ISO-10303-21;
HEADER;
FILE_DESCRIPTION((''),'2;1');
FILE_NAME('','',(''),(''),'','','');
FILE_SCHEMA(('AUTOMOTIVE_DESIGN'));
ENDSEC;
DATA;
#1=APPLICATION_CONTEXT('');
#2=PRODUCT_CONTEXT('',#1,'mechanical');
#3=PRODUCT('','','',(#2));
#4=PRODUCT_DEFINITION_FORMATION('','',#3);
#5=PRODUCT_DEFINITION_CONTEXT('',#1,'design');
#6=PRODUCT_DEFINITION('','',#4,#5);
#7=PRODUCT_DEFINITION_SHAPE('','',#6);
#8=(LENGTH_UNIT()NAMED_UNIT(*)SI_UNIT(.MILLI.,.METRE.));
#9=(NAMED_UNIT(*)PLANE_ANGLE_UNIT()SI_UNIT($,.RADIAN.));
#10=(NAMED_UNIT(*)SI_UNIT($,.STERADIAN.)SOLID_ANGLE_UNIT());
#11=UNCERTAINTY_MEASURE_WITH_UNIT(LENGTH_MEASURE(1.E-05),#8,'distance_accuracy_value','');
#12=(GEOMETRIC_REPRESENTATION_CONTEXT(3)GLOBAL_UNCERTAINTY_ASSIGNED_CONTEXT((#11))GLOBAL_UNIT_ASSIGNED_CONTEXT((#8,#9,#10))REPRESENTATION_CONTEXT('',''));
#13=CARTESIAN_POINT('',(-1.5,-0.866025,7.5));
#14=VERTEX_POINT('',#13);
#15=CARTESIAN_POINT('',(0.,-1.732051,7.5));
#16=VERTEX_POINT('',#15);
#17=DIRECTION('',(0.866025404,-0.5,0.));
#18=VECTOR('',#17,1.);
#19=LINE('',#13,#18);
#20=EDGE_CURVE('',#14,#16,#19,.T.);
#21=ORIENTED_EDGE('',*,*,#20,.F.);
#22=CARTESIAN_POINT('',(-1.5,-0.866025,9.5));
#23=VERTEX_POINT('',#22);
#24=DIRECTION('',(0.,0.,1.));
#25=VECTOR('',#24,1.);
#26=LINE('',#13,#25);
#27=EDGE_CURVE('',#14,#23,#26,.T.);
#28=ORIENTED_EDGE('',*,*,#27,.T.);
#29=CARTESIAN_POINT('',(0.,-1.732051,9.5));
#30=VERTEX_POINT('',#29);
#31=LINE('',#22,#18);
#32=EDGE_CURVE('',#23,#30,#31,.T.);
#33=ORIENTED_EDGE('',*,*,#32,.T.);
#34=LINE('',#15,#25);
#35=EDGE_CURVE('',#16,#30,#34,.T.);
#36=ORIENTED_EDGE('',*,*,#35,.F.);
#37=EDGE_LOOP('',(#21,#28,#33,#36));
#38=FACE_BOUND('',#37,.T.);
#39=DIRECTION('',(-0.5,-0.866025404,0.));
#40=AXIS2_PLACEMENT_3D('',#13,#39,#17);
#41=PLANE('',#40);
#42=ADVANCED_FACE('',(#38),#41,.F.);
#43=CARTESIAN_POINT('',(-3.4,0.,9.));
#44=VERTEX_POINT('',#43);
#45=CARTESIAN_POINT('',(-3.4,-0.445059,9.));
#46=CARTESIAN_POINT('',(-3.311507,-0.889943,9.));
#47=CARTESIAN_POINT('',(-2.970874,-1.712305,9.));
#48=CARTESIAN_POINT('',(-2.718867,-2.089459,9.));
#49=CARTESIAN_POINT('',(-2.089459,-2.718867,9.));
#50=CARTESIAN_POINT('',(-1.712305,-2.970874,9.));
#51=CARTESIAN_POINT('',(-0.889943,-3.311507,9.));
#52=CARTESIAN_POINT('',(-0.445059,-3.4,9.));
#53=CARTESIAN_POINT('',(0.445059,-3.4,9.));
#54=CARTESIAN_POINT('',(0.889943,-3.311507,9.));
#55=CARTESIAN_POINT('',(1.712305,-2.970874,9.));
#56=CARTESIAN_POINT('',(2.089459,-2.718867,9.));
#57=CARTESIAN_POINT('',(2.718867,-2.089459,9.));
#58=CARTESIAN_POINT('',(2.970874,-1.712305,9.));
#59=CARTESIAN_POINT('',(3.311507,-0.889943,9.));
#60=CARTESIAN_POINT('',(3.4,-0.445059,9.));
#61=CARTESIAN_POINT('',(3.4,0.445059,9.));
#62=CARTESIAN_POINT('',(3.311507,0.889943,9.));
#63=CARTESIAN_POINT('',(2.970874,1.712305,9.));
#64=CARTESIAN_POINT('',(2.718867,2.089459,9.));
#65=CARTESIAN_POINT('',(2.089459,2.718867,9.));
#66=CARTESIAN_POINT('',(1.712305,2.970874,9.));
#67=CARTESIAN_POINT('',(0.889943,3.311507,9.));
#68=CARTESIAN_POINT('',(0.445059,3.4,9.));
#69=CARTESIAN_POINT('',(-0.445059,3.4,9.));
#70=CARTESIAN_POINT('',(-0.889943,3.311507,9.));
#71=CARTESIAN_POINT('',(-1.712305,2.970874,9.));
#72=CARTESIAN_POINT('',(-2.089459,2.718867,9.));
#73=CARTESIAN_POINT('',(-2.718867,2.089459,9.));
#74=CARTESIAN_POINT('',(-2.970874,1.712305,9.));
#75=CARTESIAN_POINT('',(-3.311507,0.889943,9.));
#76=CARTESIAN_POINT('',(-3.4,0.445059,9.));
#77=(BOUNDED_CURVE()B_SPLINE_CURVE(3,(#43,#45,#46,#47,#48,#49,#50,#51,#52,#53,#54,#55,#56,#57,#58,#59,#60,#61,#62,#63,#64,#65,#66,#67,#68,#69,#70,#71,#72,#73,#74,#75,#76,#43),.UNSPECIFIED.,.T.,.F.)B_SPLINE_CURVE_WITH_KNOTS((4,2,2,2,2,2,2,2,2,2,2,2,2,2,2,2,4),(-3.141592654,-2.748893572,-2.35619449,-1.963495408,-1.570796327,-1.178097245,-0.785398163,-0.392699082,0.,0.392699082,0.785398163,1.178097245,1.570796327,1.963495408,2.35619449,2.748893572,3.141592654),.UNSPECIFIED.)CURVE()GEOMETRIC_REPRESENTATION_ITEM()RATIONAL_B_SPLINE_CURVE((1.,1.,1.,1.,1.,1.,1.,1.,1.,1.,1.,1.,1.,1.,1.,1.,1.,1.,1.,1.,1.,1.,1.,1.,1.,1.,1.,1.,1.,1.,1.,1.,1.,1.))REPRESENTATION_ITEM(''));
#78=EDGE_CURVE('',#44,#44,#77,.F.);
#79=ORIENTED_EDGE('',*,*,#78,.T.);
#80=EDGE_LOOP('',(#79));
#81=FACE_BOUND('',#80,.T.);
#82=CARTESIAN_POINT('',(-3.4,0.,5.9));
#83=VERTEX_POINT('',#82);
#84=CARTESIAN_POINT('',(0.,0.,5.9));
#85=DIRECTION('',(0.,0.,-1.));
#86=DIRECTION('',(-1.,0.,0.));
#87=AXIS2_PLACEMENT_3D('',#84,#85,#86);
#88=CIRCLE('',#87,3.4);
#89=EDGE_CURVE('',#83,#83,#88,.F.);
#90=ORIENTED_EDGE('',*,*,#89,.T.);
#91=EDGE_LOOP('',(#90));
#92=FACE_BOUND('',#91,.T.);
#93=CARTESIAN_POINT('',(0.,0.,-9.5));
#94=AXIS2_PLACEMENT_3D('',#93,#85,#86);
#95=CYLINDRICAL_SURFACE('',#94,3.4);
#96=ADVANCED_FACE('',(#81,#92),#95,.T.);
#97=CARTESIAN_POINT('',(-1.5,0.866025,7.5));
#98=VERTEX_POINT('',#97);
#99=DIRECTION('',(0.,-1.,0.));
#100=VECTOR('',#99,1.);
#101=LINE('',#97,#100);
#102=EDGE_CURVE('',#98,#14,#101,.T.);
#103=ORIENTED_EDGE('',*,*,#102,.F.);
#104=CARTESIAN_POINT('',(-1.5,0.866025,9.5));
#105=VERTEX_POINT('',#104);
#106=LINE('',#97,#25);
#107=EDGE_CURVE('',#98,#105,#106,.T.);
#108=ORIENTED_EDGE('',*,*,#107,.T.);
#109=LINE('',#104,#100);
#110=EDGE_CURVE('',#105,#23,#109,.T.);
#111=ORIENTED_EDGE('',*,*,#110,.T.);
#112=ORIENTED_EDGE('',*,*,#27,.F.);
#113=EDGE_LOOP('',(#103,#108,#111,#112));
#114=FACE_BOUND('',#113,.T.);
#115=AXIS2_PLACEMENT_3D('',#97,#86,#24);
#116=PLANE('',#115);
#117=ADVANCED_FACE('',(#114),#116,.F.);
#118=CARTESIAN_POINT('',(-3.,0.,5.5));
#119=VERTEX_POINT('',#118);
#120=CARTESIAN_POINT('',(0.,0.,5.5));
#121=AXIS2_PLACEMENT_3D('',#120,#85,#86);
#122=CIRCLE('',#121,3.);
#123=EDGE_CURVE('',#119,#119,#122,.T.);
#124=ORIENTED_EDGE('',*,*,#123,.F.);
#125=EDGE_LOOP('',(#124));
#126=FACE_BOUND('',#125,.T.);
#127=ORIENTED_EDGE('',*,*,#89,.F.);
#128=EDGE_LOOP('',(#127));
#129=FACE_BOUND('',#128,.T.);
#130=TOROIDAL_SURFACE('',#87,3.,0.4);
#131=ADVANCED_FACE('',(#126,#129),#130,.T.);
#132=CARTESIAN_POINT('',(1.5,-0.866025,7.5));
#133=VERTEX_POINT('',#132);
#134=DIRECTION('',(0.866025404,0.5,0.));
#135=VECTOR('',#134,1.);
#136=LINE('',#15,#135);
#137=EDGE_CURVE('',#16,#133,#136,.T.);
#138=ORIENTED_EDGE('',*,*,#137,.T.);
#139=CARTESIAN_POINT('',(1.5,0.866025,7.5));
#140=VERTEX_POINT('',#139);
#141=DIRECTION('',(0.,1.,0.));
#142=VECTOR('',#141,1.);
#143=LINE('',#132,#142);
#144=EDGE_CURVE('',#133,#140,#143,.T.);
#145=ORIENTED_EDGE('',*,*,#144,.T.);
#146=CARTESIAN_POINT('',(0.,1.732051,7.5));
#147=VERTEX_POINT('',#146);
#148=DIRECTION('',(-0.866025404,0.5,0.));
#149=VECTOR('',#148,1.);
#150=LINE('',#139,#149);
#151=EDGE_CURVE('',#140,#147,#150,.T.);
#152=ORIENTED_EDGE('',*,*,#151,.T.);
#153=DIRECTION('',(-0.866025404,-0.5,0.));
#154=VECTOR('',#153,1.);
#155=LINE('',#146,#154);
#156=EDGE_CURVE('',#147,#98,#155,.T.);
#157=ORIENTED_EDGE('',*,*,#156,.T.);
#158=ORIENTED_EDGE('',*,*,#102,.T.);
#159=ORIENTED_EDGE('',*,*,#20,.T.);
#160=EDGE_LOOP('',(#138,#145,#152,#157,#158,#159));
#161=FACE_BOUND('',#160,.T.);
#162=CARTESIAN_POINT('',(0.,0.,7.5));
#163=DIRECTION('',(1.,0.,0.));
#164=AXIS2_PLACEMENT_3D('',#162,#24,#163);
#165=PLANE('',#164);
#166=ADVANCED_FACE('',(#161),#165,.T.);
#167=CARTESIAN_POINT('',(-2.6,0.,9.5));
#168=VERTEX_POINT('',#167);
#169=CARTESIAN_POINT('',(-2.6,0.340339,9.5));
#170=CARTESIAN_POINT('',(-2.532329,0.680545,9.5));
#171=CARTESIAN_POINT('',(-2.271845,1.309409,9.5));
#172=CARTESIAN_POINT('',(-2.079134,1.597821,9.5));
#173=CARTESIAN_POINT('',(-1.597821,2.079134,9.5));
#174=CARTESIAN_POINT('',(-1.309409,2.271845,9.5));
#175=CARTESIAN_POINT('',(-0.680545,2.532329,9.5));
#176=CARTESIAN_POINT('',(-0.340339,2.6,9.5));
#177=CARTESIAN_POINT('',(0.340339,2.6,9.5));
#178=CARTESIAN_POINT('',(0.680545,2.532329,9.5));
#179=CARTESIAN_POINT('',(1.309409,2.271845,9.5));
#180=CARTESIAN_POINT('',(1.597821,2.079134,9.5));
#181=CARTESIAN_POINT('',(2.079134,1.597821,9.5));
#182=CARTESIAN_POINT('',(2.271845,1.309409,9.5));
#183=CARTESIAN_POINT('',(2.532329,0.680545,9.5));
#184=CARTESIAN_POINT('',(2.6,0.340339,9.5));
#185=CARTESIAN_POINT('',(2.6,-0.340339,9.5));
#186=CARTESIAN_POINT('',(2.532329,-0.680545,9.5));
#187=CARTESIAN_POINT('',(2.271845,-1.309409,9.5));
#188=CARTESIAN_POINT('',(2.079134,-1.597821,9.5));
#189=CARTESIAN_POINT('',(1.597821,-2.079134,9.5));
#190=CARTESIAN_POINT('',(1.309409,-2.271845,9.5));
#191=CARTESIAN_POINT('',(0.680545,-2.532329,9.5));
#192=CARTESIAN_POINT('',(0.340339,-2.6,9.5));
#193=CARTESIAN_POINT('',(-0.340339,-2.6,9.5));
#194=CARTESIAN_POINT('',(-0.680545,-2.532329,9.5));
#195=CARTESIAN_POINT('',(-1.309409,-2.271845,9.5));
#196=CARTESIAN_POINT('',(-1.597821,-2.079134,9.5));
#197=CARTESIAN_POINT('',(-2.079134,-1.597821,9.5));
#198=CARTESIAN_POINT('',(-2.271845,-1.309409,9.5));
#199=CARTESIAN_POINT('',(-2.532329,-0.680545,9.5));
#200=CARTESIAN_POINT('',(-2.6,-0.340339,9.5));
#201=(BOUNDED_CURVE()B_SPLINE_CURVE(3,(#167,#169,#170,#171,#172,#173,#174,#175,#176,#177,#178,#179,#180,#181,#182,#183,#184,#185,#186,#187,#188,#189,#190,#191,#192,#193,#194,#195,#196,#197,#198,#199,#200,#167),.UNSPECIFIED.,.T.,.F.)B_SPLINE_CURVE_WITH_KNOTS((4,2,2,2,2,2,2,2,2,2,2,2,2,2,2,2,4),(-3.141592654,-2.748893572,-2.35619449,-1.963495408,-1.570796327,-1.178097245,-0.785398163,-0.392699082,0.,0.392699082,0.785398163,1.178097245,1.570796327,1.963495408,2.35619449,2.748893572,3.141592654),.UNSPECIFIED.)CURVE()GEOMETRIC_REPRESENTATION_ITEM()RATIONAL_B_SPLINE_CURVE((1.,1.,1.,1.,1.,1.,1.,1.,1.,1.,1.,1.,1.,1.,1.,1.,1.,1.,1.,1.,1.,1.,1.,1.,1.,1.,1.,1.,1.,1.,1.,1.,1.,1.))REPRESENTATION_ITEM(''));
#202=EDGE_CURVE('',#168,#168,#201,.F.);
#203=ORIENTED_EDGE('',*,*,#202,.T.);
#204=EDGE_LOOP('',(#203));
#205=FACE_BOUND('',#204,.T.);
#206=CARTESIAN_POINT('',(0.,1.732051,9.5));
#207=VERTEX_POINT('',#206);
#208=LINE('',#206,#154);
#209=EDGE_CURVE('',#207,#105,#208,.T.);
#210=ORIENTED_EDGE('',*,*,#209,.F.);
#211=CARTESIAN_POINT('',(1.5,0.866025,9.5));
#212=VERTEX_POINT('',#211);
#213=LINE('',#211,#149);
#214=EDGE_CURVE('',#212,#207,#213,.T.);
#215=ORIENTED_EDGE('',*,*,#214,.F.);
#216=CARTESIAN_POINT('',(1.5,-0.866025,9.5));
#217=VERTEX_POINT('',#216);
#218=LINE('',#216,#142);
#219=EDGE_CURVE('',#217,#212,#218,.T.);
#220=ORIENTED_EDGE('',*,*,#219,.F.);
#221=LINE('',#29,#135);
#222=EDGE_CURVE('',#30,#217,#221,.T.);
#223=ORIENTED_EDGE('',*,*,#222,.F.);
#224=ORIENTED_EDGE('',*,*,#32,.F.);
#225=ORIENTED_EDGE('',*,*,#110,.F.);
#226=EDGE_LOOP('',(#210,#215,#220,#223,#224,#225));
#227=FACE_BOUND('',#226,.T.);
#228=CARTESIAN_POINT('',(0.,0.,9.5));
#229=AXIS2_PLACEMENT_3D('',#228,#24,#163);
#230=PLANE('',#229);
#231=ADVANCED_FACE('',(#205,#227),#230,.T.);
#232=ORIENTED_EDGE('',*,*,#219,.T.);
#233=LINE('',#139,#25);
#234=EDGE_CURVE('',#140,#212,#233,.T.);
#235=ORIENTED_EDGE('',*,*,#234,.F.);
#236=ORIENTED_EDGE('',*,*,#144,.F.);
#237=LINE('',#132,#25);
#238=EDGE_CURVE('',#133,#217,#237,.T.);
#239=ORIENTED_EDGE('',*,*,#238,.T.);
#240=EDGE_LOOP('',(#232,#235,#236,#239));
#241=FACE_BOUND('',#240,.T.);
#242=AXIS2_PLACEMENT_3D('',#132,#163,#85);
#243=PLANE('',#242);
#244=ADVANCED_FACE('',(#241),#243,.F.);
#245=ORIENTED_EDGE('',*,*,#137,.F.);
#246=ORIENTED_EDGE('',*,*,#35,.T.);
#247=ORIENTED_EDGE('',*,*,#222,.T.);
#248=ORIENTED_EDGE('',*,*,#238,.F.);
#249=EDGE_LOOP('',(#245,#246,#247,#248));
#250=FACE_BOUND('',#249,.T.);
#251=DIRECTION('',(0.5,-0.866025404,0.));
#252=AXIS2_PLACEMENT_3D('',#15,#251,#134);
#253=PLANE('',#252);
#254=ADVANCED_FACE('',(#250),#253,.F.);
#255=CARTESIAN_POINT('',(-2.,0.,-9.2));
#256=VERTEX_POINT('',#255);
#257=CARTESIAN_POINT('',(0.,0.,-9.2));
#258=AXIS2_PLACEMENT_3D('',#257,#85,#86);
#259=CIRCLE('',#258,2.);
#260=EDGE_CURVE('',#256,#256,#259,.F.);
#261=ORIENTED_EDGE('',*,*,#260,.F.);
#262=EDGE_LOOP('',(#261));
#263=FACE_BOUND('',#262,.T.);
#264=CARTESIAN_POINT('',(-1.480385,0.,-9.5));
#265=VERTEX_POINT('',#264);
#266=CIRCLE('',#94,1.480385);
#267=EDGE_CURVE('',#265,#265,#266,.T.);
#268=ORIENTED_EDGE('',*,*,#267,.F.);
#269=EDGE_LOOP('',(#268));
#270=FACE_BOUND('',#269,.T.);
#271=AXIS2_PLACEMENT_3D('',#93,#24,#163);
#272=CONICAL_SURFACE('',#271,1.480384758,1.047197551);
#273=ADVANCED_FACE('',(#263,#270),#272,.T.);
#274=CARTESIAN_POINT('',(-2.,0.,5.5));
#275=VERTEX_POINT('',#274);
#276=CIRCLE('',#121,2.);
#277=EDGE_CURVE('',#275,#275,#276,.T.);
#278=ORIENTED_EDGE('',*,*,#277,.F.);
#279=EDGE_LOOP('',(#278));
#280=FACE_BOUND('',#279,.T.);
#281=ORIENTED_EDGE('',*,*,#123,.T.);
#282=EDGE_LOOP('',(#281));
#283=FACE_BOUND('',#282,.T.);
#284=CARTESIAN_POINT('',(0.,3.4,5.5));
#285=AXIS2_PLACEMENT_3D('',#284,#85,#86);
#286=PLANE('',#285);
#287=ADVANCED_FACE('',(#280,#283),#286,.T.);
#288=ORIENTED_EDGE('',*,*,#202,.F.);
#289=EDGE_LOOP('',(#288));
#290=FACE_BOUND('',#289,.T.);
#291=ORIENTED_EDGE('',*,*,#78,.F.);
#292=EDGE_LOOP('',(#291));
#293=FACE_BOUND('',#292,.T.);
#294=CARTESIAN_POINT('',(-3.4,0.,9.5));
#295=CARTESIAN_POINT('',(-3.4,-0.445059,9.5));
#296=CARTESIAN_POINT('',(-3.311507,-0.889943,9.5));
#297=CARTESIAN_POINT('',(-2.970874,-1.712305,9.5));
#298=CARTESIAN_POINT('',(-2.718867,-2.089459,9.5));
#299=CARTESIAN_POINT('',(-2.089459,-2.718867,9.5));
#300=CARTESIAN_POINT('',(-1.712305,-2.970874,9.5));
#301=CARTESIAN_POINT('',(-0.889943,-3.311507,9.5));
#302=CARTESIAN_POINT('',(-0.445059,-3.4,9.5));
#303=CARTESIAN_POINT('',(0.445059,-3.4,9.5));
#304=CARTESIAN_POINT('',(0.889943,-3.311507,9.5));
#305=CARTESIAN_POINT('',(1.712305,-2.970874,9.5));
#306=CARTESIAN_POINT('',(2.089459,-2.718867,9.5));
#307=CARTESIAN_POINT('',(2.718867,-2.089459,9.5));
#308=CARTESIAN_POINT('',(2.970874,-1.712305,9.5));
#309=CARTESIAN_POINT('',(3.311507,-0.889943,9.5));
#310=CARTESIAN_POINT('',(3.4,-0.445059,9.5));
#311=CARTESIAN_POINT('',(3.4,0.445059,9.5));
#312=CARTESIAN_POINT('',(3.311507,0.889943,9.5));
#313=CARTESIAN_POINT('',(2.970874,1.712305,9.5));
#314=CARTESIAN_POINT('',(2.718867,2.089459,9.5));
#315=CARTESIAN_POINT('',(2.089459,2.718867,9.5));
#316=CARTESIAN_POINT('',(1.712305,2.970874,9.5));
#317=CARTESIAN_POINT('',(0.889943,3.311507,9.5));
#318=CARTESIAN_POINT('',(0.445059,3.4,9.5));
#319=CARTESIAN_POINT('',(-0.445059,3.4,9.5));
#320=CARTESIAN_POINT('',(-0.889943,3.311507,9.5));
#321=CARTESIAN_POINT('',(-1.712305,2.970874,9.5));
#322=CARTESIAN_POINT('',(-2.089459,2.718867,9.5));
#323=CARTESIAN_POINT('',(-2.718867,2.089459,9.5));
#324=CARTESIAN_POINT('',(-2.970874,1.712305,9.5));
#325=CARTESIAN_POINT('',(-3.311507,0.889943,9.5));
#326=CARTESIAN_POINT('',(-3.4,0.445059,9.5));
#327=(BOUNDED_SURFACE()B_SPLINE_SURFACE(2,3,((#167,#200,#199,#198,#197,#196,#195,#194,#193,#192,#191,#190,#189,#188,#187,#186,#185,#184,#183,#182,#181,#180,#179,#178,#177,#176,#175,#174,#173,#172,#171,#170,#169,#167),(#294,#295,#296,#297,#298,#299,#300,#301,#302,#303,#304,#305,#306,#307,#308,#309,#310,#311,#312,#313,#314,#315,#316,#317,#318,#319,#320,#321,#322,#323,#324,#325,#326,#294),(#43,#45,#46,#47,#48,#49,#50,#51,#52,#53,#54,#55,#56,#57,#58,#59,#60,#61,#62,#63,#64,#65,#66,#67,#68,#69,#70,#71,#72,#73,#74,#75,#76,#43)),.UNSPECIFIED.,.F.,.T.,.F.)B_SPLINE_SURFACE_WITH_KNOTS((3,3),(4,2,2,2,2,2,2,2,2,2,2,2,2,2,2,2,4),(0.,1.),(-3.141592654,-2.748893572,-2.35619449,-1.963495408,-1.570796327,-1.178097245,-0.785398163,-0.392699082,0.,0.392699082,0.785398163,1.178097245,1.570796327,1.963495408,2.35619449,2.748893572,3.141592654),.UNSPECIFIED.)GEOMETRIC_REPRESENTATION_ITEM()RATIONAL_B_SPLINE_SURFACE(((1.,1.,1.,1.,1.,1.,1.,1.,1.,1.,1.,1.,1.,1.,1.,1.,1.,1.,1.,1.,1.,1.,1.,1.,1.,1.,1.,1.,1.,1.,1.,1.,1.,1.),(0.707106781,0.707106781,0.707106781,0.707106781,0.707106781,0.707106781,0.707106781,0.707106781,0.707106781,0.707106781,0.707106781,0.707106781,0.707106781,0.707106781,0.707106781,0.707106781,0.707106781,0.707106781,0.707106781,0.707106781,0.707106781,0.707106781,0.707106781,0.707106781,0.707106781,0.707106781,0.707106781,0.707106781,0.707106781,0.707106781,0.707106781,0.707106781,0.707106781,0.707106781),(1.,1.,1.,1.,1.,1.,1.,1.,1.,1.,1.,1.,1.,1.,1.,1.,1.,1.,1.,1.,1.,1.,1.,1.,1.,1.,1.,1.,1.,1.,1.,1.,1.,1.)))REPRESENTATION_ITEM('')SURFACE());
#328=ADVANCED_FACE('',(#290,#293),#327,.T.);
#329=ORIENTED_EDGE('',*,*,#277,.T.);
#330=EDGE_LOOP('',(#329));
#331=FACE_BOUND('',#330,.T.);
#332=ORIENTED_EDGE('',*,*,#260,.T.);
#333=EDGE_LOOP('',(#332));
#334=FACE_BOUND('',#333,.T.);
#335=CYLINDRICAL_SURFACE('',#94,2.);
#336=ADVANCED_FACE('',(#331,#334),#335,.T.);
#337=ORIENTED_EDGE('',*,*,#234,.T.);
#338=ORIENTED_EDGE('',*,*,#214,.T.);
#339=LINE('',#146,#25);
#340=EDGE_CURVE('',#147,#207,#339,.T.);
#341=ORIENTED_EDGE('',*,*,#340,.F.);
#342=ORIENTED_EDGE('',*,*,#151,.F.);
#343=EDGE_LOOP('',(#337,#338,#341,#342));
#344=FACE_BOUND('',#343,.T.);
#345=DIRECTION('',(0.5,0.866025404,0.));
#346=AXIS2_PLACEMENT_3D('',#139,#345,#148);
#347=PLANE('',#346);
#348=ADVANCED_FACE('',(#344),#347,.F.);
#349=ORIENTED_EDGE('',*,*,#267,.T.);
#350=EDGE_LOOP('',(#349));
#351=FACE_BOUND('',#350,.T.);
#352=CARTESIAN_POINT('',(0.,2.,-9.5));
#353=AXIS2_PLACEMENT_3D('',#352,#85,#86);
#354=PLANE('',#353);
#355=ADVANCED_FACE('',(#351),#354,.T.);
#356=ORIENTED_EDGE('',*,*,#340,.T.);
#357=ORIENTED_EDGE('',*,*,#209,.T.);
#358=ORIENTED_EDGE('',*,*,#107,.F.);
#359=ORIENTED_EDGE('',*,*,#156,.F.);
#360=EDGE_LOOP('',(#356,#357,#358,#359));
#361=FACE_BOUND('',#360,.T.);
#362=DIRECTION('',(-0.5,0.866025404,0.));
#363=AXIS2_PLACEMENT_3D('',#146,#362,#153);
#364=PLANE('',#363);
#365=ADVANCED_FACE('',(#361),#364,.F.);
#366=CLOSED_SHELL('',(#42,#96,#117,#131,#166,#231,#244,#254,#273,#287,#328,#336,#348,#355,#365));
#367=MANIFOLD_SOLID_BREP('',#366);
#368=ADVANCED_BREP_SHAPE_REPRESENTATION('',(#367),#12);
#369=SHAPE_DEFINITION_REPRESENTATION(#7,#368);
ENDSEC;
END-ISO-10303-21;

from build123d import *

# Parameters (mm, degrees)
CHAMFER_1_SIZE      = 0.3
CHAMFER_1_SIZE2     = 0.519615242
FILLET_1_R          = 0.4
FILLET_2_SIZE       = 0.5
FILLET_2_SIZE_2     = 0.8
CUT_EXTRUDE_1_DEPTH = 2


with BuildPart() as part:
    # 草图2 → 旋转1 (revolve)
    with BuildSketch(Plane(origin=(0, 0, 0), x_dir=(0, 0, -1), z_dir=(1, 0, 0)), mode=Mode.PRIVATE) as revolve_1_sk:
        Polygon((-9.5, 0), (-9.5, 3.4), (-5.5, 3.4), (-5.5, 2), (9.5, 2), (9.5, 0), align=None)
    revolve(revolve_1_sk.sketch.rotate(Axis((0, 0, -9.5), (0, 0, 1)), 90), axis=Axis((0, 0, -9.5), (0, 0, 1)))

    # 倒角1
    chamfer_1_edges = [part.edges().sort_by_distance(p)[0] for p in [
        (2, 0, -9.5),
    ]]
    chamfer_1_side = [part.faces().sort_by_distance(p)[0] for p in [
        (2, 0, -2),
    ]]
    chamfer(chamfer_1_edges, length=CHAMFER_1_SIZE, length2=CHAMFER_1_SIZE2, reference=chamfer_1_side[0])

    # 圆角1
    fillet_1_edges = [part.edges().sort_by_distance(p)[0] for p in [
        (3.4, 0, 5.5),
    ]]
    fillet(fillet_1_edges, radius=FILLET_1_R)

    # 圆角2
    # an asymmetric fillet: 0.8, 0.5 mm, written as the material it takes off along each edge
    with BuildSketch(Plane(origin=(0, 0, 9.5), x_dir=(-1, 0, 0), z_dir=(0, 1, 0))) as fillet_2_piece_1:
        with BuildLine():
            Bezier((3.4, -FILLET_2_SIZE), (3.4, 0), (3.4 - FILLET_2_SIZE_2, 0), weights=[1, 0.707106781, 1])
            Line((3.4 - FILLET_2_SIZE_2, 0), (3.4, 0))
            Line((3.4, 0), (3.4, -FILLET_2_SIZE))
        make_face()
    revolve(axis=Axis((0, 0, 9.5), (0, 0, 1)), mode=Mode.SUBTRACT)

    # 草图3 → 切除-拉伸1 (cut)
    with BuildSketch(Plane.XY.offset(9.5)):
        Polygon((0, 1.732050808), (-1.5, 0.866025404), (-1.5, -0.866025404), (0, -1.732050808), (1.5, -0.866025404), (1.5, 0.866025404), align=None)
    extrude(amount=-CUT_EXTRUDE_1_DEPTH, mode=Mode.SUBTRACT)


solid = part.part
